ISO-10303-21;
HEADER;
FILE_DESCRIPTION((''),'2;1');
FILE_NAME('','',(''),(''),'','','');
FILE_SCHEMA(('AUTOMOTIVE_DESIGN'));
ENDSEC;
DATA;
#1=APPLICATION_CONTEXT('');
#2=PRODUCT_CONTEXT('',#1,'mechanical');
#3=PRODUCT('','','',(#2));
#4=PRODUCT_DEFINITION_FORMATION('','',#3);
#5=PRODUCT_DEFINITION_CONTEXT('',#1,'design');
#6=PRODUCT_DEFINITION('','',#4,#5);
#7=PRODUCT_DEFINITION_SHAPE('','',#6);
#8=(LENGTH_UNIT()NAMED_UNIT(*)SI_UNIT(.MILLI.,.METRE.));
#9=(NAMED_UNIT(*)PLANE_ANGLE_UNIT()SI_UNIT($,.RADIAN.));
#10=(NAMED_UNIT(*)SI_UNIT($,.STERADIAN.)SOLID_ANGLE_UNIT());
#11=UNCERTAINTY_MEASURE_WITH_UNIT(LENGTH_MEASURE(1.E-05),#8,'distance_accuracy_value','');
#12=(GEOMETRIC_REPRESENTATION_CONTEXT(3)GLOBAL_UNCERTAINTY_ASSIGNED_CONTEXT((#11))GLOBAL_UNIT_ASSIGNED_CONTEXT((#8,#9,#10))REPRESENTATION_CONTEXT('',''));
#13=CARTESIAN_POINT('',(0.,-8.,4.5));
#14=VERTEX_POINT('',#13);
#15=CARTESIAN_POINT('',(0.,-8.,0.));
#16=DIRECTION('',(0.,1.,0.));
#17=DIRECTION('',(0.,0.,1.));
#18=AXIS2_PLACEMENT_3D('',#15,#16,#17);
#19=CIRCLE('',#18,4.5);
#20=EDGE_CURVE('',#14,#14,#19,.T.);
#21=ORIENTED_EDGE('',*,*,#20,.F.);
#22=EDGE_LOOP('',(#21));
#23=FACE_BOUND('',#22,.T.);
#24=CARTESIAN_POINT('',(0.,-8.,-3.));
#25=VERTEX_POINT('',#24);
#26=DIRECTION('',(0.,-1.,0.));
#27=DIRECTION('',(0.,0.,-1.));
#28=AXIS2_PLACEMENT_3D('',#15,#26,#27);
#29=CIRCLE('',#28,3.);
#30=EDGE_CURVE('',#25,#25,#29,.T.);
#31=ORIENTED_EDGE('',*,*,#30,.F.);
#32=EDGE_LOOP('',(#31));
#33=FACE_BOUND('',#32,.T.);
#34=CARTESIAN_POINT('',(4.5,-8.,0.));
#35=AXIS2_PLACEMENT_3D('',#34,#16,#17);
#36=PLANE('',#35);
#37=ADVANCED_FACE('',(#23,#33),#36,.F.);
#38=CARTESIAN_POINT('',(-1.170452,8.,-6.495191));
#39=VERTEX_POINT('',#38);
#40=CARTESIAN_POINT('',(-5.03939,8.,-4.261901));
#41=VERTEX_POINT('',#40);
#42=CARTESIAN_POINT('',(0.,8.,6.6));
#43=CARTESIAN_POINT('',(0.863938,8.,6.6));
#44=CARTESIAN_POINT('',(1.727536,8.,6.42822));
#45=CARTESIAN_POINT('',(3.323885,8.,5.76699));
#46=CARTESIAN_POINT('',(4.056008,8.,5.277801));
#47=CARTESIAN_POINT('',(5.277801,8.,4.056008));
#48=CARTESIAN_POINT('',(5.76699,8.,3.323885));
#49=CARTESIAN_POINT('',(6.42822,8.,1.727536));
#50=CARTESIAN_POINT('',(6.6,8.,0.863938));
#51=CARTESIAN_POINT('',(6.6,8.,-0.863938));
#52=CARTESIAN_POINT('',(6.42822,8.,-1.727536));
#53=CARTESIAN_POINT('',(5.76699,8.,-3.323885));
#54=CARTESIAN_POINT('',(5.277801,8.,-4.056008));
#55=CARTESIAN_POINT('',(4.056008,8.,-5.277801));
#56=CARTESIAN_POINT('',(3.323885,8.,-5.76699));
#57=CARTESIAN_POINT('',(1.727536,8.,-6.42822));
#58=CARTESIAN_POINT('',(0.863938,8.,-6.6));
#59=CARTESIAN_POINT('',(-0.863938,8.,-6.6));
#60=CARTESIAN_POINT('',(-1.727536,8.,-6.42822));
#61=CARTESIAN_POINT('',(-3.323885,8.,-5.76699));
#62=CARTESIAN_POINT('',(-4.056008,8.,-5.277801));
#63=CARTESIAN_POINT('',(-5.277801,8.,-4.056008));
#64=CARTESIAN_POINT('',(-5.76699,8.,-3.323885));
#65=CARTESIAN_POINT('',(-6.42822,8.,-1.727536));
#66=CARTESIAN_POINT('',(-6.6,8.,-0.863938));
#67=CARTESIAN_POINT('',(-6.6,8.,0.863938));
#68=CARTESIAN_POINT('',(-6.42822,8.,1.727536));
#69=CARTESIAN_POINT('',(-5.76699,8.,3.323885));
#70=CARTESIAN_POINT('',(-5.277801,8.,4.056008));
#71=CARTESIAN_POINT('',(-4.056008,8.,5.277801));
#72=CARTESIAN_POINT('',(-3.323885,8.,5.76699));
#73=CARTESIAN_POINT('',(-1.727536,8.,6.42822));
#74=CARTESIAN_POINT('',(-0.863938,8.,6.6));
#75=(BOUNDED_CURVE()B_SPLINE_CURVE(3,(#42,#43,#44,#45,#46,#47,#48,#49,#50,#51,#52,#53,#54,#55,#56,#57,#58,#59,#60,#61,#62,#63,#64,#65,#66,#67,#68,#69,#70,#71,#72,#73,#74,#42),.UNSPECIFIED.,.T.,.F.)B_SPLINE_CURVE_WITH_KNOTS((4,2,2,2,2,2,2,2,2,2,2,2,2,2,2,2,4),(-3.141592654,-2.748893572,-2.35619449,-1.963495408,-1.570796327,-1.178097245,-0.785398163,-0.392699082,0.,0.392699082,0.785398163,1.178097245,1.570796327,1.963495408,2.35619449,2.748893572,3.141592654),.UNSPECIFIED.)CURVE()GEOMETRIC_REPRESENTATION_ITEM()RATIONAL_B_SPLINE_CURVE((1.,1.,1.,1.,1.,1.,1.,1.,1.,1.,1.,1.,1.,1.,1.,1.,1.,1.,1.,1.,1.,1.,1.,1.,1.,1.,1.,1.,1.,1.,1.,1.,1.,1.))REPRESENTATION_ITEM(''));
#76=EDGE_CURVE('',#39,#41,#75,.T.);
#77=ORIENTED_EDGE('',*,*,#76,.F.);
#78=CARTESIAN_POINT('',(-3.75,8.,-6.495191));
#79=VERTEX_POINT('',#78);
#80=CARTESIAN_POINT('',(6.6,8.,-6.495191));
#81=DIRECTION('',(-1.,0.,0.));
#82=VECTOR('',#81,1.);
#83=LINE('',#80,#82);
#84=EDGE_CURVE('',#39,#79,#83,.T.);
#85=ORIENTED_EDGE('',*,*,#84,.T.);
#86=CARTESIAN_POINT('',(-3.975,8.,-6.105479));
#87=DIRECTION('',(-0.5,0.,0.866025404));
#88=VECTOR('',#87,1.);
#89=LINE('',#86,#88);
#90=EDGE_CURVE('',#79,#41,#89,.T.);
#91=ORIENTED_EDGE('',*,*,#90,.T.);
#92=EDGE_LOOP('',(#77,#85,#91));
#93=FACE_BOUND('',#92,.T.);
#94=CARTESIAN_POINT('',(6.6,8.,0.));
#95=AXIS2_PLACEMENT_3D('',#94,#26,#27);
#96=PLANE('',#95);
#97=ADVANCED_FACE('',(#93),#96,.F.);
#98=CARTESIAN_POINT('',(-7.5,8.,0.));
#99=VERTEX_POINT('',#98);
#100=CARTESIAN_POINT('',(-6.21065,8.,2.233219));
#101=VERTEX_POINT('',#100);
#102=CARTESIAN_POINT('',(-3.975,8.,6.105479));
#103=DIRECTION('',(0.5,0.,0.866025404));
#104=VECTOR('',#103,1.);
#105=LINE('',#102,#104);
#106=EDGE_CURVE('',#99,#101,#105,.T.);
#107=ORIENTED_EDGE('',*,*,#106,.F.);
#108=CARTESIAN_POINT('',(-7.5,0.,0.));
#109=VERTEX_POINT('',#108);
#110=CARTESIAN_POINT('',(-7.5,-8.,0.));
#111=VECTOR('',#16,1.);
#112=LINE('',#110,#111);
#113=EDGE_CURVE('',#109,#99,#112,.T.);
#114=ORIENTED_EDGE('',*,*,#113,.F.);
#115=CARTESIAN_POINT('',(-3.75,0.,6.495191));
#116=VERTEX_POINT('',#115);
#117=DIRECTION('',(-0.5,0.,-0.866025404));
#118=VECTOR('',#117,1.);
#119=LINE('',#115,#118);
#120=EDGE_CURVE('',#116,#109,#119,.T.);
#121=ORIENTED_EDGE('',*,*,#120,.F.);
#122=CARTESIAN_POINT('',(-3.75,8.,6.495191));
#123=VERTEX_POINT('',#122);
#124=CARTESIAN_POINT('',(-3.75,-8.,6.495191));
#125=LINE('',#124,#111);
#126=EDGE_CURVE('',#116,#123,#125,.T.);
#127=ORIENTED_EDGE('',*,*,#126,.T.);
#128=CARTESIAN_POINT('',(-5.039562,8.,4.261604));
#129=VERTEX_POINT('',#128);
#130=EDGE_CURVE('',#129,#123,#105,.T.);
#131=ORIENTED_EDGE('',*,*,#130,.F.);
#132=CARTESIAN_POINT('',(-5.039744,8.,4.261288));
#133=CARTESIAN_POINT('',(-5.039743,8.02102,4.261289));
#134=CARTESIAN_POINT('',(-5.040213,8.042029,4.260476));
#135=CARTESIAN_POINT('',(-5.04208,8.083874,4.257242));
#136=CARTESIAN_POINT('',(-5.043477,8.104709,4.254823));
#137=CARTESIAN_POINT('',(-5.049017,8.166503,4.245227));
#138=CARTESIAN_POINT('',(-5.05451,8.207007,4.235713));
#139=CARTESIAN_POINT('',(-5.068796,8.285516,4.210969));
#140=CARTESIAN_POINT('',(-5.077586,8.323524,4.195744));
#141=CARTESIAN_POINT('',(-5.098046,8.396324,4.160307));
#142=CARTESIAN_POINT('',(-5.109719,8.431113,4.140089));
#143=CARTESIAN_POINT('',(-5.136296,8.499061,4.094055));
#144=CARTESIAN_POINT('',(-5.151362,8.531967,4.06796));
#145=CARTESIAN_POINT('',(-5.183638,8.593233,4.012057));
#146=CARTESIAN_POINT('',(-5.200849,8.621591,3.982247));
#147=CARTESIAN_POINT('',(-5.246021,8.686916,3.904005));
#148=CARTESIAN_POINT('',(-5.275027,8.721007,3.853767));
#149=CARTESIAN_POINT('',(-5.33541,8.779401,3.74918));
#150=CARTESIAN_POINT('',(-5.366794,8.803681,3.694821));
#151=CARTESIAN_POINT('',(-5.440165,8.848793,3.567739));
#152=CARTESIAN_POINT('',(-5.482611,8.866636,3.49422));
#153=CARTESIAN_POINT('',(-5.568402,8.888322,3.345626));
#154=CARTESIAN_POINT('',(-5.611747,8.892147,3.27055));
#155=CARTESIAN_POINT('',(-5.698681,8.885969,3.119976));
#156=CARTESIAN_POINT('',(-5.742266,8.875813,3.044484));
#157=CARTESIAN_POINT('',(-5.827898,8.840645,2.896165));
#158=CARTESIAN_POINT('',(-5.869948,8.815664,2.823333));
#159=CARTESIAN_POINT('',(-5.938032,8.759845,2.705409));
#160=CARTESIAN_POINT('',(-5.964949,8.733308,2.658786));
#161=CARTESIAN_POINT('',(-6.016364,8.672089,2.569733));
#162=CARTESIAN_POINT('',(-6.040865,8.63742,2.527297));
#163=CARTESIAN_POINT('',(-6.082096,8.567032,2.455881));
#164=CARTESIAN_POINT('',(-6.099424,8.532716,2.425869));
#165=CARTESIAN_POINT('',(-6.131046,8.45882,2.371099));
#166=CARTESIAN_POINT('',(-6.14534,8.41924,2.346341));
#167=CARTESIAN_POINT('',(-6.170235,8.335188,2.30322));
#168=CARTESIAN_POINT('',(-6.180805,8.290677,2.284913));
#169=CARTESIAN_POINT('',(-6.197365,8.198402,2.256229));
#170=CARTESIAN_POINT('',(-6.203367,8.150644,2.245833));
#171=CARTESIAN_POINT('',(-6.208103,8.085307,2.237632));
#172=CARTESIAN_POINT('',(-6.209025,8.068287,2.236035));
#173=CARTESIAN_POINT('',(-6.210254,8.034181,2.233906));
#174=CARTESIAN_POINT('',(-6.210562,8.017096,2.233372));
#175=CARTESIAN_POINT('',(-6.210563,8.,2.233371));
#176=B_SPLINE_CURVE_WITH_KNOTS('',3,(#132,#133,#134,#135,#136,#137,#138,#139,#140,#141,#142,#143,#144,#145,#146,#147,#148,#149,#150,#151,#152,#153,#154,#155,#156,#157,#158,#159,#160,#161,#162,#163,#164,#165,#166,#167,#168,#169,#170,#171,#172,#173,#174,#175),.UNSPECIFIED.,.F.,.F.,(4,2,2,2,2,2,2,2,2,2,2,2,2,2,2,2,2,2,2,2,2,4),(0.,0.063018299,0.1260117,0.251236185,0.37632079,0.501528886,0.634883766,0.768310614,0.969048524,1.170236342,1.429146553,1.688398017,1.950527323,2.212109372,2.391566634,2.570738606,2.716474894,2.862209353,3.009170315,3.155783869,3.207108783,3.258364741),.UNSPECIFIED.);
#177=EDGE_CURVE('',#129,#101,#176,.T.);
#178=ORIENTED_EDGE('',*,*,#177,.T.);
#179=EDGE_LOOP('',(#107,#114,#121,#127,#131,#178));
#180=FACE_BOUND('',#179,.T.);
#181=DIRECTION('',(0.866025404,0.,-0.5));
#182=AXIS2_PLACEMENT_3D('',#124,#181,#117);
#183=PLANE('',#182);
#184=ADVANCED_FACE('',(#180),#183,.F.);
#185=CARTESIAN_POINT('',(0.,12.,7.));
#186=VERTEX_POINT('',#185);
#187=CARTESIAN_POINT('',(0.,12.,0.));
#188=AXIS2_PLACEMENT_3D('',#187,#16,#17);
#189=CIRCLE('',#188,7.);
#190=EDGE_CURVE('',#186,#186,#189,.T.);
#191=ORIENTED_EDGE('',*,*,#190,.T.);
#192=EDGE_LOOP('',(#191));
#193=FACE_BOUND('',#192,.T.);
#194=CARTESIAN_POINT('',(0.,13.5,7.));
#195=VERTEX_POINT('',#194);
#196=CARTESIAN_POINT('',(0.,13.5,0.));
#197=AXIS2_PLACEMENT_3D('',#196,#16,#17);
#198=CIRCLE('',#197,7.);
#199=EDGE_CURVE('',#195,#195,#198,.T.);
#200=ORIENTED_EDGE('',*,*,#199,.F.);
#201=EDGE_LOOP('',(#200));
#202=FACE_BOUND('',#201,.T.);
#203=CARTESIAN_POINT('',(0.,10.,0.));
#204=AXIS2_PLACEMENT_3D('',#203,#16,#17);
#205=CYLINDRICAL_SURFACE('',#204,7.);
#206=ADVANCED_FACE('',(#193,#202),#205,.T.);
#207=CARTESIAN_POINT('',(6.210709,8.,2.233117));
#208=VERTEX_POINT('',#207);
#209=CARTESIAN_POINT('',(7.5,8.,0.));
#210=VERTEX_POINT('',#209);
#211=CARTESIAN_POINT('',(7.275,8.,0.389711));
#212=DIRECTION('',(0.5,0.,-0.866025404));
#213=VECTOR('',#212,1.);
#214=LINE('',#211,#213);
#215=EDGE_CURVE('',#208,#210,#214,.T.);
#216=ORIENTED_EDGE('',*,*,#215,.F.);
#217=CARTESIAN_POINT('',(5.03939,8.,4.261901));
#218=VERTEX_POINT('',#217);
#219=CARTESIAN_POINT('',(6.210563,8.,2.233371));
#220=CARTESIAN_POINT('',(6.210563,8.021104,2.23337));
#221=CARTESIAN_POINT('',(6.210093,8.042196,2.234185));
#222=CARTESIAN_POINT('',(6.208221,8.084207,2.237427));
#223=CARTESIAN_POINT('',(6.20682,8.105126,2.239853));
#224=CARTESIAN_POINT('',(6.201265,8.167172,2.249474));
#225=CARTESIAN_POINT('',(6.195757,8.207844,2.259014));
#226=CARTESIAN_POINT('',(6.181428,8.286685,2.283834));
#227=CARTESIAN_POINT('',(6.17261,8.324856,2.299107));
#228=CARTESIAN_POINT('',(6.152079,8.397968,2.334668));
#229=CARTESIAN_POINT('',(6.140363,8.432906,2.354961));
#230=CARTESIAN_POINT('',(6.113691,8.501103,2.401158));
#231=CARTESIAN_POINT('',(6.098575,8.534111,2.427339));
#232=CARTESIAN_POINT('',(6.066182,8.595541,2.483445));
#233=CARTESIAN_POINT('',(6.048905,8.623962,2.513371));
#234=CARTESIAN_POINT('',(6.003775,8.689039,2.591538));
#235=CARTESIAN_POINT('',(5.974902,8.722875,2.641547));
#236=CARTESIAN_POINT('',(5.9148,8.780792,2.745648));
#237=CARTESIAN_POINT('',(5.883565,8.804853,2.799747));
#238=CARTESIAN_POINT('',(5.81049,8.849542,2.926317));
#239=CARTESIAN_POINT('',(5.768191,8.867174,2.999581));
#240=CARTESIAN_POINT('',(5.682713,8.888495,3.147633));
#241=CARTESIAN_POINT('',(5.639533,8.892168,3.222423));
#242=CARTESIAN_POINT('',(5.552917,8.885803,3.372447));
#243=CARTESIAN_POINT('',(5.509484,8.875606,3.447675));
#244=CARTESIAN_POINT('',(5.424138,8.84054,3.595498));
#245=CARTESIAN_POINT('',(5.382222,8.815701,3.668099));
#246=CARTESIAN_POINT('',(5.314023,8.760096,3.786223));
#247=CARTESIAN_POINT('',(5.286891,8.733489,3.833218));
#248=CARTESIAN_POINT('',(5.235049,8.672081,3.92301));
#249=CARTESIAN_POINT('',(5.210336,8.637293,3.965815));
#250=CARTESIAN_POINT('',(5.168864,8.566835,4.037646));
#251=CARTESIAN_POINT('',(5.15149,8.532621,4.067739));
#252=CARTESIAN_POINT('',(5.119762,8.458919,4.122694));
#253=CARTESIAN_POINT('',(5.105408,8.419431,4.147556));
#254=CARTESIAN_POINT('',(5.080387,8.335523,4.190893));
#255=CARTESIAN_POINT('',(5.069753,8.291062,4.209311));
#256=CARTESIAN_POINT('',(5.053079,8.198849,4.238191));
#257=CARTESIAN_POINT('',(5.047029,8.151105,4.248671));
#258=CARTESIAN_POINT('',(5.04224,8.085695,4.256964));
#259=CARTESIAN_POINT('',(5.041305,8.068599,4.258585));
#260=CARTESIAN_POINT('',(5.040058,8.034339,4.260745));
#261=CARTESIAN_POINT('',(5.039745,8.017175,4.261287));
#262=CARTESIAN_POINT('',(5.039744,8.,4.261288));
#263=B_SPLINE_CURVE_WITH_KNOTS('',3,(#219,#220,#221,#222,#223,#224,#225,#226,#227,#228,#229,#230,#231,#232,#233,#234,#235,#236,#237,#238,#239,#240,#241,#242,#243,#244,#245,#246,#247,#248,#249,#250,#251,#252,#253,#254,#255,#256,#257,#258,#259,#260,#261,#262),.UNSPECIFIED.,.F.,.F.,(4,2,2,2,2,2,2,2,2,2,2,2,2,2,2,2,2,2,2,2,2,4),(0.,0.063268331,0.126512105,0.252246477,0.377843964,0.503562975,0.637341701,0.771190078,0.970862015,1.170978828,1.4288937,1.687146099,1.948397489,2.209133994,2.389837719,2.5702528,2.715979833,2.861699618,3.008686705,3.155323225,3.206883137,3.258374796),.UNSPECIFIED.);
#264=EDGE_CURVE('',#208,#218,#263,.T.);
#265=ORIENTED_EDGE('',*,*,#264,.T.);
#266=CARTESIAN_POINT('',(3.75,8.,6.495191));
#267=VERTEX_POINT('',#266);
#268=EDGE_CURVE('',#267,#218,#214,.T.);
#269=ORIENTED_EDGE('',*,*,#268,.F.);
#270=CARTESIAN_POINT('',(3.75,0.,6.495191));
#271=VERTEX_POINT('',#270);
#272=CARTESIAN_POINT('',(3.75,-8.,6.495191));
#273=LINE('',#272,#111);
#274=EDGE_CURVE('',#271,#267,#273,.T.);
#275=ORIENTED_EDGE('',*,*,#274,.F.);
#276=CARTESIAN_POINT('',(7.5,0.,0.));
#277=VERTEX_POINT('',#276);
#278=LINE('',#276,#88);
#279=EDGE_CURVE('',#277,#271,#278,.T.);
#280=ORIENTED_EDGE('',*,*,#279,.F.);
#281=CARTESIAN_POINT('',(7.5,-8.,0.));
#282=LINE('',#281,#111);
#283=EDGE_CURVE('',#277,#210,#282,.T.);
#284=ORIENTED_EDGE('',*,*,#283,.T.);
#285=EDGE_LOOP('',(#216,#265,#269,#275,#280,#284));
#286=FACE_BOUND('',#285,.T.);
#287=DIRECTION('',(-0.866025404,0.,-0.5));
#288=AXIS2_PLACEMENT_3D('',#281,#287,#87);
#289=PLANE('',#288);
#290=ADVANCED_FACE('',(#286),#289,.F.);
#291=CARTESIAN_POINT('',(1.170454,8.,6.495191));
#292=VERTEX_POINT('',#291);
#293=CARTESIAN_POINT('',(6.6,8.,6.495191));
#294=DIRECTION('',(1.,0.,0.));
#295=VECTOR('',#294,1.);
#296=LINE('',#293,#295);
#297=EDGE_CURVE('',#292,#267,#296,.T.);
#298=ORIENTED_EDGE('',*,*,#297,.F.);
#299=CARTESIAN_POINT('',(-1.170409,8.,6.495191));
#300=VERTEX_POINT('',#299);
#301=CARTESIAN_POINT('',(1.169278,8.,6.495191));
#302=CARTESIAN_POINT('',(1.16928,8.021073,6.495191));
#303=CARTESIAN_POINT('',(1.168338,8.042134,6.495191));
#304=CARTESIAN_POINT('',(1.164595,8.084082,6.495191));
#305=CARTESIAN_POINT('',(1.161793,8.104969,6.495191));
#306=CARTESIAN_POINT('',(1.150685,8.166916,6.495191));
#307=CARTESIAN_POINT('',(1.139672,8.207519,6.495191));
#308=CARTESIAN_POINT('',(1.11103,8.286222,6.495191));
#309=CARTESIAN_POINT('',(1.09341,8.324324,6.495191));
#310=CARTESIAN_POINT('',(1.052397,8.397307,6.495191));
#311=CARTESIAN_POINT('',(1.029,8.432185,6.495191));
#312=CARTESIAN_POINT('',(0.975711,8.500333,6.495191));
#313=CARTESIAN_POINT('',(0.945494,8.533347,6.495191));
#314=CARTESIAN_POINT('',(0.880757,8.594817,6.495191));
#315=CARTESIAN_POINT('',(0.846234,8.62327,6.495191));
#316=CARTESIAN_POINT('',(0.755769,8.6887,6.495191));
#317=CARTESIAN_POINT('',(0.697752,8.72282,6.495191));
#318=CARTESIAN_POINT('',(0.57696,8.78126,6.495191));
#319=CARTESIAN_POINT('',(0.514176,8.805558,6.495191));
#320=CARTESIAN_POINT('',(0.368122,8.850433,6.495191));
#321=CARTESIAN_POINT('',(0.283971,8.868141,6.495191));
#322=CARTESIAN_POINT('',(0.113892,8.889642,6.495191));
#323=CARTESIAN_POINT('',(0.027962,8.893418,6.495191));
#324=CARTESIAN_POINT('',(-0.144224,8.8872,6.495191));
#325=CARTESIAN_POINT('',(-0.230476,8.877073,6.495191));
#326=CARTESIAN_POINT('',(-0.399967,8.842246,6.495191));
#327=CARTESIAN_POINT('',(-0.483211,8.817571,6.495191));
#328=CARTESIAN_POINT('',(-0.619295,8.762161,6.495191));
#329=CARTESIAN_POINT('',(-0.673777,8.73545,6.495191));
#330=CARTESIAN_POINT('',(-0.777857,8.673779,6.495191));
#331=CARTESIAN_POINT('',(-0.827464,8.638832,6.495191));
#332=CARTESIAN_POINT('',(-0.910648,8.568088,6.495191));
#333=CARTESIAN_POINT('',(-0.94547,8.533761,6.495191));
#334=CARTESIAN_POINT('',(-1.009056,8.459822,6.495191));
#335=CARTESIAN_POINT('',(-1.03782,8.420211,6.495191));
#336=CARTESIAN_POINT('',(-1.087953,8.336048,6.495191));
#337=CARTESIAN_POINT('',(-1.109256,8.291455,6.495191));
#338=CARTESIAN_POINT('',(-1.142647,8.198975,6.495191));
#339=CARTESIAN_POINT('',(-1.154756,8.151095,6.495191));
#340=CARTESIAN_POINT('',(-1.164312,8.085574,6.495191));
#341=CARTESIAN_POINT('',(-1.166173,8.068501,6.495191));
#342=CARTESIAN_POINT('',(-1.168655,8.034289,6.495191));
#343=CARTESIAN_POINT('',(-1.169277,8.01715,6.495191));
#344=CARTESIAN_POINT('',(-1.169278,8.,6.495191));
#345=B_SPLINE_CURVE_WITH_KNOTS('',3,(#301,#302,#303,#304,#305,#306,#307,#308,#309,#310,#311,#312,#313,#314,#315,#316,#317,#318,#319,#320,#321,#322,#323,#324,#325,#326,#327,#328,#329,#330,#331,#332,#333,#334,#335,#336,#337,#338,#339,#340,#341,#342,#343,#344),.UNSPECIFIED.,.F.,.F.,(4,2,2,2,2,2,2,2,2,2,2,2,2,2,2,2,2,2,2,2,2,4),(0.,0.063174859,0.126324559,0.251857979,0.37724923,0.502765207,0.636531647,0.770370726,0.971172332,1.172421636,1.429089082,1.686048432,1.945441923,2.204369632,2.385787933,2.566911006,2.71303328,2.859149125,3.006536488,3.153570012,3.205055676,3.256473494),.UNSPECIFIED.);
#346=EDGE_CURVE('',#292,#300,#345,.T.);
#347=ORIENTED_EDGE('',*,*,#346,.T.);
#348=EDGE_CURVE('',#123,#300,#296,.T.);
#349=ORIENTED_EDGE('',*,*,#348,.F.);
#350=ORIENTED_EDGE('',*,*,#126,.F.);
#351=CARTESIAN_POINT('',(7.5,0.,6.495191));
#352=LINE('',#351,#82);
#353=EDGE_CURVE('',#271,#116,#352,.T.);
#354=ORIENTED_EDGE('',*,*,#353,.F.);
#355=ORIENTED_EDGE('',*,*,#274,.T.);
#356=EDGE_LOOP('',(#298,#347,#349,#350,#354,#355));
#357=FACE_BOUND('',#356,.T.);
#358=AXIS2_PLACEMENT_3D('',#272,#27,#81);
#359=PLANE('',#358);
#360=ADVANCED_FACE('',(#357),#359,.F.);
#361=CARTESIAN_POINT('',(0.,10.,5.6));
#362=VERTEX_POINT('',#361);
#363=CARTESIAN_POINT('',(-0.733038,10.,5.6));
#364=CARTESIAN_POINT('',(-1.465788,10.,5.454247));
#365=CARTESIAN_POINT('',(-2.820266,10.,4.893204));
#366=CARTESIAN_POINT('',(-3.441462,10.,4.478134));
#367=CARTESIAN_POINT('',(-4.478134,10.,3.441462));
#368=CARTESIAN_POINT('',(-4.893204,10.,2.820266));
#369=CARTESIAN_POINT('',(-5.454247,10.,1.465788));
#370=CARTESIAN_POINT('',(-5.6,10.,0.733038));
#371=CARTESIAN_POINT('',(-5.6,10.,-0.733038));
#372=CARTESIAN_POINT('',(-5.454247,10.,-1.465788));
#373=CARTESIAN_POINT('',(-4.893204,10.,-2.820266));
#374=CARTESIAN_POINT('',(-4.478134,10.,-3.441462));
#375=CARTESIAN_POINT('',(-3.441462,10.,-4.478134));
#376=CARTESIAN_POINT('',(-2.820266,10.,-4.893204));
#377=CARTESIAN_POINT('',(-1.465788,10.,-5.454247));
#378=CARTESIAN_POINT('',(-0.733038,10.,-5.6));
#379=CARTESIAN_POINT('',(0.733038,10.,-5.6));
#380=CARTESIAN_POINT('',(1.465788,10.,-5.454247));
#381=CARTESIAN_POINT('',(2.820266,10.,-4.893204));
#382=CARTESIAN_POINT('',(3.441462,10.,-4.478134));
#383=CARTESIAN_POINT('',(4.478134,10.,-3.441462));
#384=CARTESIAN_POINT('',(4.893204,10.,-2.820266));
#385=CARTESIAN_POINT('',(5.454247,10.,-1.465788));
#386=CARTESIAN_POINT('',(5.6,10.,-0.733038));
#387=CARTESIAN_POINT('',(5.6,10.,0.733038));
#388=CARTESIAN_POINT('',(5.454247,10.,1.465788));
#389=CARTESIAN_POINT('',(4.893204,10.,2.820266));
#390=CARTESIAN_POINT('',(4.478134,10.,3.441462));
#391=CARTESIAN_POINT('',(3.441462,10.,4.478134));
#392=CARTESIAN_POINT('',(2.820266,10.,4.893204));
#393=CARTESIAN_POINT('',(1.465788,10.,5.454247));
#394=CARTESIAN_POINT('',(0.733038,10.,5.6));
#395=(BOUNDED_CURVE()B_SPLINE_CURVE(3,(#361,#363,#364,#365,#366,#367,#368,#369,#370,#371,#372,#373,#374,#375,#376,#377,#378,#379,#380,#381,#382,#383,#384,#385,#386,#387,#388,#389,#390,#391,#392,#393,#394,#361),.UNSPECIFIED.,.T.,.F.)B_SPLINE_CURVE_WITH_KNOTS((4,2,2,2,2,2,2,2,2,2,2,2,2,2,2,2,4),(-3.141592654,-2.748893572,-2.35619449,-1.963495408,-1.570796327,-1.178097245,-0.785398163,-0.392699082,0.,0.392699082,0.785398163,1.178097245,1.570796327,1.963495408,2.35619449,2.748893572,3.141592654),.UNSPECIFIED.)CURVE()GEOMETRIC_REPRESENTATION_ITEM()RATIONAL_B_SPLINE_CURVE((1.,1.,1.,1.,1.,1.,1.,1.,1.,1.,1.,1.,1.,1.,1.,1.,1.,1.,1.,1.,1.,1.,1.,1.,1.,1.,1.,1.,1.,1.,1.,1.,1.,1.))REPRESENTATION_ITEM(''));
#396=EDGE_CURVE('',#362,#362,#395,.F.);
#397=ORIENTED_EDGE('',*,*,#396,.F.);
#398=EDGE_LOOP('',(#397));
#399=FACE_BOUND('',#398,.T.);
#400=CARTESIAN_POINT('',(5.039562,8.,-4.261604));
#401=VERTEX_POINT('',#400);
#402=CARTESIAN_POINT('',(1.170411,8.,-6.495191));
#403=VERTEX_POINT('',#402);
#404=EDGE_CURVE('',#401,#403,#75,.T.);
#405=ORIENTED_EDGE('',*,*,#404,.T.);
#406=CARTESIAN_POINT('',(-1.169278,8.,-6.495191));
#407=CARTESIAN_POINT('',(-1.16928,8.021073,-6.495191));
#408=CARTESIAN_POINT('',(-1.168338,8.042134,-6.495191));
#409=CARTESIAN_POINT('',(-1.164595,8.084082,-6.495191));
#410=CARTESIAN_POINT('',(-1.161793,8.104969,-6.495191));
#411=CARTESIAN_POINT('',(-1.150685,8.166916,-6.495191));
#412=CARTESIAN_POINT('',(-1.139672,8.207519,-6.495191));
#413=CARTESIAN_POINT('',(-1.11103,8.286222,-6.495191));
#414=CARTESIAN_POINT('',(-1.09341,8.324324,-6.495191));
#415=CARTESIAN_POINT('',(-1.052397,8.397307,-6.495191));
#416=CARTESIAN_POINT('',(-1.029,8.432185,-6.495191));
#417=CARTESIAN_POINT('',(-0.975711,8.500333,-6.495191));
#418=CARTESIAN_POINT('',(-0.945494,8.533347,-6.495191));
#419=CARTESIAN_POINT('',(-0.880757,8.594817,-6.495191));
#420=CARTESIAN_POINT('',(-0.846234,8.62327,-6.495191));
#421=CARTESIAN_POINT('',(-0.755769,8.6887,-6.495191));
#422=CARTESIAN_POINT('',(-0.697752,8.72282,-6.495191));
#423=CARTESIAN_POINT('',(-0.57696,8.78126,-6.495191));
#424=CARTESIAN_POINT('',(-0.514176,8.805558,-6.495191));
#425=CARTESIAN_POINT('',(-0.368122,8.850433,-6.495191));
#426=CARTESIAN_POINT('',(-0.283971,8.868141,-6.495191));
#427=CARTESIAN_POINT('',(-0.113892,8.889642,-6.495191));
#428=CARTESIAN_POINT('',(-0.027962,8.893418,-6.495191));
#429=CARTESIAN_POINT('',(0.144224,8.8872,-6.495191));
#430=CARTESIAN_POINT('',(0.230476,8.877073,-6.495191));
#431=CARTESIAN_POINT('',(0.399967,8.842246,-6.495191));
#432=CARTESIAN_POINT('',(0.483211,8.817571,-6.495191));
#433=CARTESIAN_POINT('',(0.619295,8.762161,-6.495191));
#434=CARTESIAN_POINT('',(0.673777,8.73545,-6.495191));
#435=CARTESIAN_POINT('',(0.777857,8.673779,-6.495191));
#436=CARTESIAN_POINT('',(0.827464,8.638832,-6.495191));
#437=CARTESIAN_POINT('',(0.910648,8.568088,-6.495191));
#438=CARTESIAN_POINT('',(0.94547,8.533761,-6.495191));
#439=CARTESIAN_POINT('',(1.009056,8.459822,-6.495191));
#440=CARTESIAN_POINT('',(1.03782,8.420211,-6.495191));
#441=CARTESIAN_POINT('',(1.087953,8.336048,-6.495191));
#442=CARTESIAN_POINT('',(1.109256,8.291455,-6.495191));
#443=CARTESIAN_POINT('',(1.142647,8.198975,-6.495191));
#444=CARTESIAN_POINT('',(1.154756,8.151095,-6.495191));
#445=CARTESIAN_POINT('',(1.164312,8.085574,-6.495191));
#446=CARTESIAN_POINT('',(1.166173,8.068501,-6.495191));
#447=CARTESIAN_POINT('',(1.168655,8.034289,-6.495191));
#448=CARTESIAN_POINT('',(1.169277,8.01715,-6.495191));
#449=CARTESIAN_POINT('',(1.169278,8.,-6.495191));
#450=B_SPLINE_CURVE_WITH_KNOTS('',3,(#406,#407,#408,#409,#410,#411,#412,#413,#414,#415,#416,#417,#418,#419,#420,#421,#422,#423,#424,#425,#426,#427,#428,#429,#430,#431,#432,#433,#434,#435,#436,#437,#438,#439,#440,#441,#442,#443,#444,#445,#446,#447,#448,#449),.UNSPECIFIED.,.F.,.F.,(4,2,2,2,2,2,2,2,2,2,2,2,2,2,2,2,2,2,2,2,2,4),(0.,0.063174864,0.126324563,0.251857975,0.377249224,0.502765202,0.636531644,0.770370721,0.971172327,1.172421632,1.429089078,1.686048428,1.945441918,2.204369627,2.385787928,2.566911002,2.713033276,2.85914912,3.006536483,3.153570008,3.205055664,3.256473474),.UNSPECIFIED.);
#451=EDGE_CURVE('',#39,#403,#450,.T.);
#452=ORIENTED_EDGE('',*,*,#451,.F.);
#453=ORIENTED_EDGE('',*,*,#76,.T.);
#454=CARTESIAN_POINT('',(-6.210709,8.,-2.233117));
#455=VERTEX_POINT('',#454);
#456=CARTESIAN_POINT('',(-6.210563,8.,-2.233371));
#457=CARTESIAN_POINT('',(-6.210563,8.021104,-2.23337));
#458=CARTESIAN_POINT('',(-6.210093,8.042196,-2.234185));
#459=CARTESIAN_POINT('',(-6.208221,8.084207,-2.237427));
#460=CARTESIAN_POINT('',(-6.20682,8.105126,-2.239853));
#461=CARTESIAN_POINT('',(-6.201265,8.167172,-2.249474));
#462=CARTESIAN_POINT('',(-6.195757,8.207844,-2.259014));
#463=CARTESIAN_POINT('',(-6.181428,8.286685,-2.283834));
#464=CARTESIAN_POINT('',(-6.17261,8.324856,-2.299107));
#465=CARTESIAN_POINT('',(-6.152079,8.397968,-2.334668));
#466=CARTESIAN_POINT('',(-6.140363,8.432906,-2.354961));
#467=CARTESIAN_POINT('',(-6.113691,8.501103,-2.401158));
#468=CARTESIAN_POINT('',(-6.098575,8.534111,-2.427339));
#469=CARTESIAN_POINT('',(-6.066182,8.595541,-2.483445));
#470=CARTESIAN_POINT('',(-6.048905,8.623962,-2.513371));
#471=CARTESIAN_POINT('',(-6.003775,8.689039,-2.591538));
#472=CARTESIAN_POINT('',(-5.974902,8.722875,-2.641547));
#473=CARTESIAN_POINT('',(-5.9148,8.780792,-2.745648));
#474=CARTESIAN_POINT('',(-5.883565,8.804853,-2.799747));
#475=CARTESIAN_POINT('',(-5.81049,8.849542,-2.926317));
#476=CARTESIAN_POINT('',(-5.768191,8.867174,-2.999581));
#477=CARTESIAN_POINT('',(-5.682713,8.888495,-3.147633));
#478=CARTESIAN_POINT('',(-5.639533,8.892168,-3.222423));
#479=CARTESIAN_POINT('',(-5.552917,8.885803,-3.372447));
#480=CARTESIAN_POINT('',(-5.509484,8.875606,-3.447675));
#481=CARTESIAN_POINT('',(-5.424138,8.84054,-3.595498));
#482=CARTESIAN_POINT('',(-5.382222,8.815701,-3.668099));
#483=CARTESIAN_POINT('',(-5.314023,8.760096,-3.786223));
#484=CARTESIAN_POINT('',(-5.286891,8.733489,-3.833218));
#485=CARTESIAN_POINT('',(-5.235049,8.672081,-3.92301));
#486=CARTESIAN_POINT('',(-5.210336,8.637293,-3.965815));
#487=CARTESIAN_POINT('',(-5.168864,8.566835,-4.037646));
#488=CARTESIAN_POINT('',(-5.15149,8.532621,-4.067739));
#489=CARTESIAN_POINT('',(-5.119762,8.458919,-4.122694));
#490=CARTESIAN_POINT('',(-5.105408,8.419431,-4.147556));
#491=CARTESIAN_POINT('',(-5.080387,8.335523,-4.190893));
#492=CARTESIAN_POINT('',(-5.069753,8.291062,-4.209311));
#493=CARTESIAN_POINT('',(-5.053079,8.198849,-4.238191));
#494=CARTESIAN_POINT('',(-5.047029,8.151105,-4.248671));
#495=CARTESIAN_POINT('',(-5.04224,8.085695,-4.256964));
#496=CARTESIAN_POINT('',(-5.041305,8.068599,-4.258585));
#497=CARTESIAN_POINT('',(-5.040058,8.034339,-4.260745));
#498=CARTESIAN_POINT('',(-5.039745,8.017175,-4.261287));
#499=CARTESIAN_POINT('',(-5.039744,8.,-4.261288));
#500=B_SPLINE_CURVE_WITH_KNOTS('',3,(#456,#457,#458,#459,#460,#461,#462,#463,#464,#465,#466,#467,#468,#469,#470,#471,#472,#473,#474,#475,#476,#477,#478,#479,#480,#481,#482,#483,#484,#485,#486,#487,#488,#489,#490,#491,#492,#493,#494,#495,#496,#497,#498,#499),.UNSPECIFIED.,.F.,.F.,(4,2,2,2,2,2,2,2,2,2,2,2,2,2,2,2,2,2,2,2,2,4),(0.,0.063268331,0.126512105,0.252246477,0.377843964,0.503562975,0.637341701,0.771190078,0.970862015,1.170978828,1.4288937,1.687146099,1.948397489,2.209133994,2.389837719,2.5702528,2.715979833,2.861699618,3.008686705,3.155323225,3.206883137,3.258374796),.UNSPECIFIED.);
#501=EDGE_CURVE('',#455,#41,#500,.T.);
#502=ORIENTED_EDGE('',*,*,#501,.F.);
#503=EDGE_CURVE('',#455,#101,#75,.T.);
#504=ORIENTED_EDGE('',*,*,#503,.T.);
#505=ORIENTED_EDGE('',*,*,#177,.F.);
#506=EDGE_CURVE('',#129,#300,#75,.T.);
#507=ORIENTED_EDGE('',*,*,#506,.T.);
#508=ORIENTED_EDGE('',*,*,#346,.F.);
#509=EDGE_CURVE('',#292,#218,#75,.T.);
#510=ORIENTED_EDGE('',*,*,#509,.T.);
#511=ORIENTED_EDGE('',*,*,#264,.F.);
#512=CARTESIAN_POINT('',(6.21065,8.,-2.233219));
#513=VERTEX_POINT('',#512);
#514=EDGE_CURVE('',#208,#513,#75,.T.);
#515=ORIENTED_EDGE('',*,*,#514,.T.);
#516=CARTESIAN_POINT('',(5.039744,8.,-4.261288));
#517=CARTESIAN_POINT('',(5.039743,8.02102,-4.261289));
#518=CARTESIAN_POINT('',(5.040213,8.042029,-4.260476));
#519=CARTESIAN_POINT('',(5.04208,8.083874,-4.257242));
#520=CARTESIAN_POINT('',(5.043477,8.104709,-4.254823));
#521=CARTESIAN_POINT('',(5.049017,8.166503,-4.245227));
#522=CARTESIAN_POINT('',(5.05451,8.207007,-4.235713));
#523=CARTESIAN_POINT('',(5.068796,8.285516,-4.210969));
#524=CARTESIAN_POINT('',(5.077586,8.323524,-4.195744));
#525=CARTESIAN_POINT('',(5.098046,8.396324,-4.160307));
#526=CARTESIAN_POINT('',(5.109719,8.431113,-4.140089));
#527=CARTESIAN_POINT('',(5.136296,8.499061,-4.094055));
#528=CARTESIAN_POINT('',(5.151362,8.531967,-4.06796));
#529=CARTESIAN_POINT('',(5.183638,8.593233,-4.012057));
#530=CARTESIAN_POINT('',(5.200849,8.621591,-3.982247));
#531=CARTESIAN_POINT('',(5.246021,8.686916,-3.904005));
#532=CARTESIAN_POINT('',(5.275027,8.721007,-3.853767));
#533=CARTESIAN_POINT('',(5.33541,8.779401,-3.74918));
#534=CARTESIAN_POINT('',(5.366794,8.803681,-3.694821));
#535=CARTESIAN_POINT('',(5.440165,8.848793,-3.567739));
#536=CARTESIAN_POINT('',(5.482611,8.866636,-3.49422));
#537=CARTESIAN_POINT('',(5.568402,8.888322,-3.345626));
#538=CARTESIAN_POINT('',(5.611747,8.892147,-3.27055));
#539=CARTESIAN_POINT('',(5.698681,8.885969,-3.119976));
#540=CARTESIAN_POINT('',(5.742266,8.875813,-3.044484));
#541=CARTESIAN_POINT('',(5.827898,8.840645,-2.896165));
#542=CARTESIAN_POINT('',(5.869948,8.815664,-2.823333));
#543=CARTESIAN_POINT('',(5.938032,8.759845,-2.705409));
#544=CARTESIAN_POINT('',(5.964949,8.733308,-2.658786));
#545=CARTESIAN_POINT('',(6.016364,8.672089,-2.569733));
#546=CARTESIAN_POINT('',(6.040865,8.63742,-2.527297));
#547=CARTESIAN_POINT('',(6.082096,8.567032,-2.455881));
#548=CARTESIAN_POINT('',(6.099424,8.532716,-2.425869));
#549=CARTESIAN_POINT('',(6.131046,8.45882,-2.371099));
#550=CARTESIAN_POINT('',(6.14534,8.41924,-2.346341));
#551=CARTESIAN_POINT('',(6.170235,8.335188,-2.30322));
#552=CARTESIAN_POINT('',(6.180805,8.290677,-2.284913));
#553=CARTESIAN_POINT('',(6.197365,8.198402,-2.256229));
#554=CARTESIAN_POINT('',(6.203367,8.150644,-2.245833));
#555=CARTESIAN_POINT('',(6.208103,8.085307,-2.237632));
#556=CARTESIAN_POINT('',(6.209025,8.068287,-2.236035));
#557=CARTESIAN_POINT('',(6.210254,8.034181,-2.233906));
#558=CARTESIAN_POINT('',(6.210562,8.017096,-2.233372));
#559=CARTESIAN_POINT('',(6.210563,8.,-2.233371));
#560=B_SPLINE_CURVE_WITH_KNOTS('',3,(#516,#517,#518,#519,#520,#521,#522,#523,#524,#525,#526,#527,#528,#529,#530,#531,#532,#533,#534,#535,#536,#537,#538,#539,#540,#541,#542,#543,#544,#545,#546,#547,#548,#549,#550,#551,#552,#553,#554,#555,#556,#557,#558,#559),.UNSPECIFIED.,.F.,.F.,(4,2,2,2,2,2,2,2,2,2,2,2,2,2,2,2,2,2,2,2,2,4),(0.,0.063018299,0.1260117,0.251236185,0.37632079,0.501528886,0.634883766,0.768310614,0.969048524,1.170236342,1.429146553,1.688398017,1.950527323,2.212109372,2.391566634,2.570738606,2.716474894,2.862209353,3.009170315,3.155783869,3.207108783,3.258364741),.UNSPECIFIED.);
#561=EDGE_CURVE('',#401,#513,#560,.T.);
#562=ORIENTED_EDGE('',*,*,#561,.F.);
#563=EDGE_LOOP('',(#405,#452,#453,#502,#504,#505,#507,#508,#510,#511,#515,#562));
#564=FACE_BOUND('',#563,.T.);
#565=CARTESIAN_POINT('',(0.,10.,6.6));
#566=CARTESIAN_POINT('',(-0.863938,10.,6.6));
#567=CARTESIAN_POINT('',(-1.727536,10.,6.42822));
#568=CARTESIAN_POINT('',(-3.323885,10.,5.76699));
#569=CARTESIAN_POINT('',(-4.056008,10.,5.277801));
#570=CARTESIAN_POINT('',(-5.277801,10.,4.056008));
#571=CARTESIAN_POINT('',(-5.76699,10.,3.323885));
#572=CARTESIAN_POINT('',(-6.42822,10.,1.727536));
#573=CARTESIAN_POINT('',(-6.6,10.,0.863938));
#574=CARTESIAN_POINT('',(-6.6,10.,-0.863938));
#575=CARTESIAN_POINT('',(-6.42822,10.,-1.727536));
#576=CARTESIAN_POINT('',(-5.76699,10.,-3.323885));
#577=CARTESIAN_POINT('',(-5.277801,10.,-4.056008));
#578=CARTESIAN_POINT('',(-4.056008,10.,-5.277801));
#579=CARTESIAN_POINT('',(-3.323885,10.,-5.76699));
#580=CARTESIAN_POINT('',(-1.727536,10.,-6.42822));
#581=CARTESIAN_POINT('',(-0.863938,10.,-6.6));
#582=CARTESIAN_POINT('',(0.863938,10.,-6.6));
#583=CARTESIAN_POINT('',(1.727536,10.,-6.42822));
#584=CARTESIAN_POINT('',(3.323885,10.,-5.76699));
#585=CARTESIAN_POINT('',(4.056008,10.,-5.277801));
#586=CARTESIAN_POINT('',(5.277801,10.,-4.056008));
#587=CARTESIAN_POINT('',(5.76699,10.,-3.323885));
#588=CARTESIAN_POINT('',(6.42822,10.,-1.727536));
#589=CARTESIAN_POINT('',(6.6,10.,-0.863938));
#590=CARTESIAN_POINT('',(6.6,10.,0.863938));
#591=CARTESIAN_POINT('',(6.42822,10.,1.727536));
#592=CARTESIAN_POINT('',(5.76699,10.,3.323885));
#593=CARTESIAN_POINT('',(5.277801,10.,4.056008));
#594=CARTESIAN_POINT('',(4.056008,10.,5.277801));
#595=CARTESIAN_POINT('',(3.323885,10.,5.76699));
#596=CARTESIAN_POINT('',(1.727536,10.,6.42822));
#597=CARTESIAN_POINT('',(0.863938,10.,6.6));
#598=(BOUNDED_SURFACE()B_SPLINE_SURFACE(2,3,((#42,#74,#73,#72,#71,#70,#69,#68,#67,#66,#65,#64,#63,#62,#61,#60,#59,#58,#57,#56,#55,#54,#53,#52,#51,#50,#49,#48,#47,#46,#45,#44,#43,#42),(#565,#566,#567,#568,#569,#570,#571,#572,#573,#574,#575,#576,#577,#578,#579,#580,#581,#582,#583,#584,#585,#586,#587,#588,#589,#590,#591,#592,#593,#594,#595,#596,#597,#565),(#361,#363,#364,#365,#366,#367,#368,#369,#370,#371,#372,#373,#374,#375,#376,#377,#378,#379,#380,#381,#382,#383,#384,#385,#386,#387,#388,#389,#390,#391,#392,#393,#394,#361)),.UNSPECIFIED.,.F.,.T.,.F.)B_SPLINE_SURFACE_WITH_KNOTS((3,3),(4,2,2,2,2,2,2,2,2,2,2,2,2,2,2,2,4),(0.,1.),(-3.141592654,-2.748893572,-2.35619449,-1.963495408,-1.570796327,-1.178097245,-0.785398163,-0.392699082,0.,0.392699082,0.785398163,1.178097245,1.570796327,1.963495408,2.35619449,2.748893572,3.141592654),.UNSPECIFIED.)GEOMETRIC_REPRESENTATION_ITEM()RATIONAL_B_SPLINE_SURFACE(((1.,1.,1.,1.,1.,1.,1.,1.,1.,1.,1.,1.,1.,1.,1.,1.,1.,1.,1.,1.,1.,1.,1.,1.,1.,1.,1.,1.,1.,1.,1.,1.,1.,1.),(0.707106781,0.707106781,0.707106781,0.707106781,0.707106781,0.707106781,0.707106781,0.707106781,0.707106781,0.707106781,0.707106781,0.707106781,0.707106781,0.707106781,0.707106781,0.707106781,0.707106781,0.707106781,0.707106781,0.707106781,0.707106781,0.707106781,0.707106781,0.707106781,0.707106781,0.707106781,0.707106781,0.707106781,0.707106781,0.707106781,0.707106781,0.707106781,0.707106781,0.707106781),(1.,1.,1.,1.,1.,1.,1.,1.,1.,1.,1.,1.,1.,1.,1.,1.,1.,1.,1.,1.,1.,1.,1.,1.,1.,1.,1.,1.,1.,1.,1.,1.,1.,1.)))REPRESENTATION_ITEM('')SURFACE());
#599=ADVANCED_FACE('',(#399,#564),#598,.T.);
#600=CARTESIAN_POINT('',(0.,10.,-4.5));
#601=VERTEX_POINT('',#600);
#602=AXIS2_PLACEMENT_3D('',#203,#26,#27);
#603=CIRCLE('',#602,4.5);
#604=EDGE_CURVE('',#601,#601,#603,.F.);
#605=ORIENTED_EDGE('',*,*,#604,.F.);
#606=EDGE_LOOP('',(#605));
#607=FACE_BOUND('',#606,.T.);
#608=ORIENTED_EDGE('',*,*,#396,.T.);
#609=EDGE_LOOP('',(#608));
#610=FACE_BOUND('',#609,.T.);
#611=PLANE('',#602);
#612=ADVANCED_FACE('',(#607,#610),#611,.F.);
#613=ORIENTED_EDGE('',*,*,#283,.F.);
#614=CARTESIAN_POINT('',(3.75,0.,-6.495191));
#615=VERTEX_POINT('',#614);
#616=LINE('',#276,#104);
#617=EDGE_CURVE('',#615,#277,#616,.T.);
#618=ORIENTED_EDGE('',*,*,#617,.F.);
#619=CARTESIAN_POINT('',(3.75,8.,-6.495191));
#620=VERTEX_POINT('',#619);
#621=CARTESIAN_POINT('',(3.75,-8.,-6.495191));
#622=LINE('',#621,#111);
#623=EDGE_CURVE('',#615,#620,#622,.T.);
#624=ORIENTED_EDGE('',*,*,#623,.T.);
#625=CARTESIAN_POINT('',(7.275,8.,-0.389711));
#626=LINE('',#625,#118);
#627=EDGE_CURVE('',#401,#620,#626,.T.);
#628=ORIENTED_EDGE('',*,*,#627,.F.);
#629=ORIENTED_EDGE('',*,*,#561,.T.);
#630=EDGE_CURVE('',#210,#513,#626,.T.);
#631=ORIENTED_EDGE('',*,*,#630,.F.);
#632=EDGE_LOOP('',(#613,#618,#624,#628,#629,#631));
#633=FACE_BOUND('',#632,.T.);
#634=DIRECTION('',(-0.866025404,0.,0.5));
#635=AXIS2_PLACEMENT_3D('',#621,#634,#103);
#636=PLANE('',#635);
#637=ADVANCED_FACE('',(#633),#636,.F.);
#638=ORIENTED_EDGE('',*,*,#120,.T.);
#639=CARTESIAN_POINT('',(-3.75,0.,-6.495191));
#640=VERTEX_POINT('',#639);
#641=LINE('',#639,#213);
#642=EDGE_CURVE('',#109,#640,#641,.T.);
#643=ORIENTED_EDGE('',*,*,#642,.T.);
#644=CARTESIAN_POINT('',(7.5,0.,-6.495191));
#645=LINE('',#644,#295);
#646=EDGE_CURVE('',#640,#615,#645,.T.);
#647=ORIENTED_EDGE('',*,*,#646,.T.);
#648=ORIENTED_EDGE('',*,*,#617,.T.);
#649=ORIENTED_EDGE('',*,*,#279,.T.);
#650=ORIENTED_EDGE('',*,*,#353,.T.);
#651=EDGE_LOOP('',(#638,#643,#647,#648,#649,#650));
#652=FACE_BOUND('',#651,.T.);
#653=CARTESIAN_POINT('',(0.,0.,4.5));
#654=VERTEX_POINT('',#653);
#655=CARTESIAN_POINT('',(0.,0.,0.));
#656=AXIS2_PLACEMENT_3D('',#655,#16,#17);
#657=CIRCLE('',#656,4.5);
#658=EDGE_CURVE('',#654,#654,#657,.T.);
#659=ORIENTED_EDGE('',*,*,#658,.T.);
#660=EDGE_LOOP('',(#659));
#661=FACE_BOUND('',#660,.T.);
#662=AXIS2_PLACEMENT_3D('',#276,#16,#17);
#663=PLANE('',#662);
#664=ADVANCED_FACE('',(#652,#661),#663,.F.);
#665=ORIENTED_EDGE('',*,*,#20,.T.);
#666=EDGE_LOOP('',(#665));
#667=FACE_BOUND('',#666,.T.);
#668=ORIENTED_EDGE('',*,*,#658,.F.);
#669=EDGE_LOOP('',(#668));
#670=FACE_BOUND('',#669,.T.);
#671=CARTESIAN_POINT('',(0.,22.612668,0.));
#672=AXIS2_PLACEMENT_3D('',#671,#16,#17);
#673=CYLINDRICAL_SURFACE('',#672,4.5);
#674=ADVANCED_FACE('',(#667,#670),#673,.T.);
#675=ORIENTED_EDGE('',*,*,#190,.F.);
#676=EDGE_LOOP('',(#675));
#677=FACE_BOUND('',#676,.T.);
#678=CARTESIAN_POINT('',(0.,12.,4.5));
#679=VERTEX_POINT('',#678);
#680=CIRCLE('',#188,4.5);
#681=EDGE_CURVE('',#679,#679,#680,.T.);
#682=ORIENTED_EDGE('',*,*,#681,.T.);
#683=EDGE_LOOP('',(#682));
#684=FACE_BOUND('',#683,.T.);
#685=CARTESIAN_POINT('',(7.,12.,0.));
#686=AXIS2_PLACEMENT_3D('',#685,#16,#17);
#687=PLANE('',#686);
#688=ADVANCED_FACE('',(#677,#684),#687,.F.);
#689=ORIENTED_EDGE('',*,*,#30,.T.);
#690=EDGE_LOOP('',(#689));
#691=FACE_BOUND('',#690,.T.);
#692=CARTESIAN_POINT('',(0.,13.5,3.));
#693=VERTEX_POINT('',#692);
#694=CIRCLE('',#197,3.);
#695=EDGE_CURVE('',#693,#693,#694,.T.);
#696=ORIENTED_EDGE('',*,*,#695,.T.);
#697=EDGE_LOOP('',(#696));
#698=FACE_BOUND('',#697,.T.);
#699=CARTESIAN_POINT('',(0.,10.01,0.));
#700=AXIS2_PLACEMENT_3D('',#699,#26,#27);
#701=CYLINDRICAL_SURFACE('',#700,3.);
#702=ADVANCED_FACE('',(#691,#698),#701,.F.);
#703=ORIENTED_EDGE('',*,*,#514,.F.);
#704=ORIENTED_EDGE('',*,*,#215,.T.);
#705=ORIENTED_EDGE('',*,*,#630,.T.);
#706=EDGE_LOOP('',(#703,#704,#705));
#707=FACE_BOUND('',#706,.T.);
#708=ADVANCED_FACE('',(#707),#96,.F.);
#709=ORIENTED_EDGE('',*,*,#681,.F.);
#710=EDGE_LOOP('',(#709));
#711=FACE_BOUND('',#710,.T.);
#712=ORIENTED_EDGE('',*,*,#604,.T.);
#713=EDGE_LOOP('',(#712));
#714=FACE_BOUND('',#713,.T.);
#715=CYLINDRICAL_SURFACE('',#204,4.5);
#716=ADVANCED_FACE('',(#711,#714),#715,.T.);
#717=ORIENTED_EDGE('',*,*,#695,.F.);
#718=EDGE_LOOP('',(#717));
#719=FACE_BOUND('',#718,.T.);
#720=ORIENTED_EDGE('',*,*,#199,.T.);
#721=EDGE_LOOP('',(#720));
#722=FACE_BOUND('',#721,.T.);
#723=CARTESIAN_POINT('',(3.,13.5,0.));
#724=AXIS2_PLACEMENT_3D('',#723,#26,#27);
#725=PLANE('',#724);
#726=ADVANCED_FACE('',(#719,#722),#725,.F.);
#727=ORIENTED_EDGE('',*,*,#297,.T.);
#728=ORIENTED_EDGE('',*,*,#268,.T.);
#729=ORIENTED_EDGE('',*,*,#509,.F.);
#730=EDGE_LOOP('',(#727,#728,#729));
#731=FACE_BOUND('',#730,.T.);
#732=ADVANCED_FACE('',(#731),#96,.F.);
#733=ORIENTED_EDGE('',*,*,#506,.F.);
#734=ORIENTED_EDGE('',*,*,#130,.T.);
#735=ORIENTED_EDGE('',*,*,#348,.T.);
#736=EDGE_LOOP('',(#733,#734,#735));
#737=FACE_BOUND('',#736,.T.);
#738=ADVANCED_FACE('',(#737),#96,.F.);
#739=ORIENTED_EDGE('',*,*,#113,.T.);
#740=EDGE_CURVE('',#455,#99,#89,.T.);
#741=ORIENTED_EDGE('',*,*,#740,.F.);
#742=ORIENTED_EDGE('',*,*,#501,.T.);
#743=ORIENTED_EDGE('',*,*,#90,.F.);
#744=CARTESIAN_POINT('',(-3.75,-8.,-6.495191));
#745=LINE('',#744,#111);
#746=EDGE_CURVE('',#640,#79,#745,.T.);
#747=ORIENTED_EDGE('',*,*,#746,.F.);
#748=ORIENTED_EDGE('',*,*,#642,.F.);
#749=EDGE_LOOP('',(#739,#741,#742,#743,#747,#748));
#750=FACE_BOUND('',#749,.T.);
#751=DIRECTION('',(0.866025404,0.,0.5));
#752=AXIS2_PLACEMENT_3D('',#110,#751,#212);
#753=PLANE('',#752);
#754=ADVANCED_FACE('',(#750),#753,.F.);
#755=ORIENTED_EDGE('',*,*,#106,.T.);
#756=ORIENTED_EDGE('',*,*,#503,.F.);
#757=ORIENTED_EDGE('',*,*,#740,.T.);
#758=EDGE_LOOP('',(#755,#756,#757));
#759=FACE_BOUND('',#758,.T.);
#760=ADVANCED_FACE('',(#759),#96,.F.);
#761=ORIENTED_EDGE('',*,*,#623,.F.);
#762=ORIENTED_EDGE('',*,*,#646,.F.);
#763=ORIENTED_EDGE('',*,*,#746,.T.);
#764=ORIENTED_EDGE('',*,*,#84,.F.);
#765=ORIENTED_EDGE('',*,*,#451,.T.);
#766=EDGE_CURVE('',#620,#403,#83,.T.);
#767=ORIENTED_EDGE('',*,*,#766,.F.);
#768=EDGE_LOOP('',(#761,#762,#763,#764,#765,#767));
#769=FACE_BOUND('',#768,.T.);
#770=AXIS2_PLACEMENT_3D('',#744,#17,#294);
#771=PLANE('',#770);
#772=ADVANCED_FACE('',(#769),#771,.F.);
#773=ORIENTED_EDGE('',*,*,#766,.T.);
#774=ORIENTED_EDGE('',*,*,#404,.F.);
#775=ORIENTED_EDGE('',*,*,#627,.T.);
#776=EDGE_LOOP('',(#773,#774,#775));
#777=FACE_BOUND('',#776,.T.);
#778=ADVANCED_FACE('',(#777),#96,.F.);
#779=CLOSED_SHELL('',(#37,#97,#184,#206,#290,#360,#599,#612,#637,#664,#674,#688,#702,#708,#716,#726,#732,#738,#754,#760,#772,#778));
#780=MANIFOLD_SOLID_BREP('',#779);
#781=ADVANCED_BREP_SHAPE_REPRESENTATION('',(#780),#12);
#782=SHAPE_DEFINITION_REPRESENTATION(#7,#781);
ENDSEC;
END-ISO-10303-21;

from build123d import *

# Parameters (mm, degrees)
FILLET1_SIZE       = 1
FILLET1_SIZE_2     = 2
CUT_EXTRUDE1_DEPTH = 20.19635382
CIRPATTERN1_COUNT  = 6
SKETCH6_R          = 3
CUT_EXTRUDE2_DEPTH = 21.553284565


with BuildPart() as part:
    # Sketch1 → Revolve1 (revolve)
    with BuildSketch(Plane.XY, mode=Mode.PRIVATE) as revolve1_sk:
        Polygon((0, 10), (6.6, 10), (6.6, 8), (7.5, 8), (7.5, 0), (4.5, 0), (4.5, -8), (0, -8), align=None)
    revolve(revolve1_sk.sketch.rotate(Axis((0, 22.612667954, 0), (0, -1, 0)), 90), axis=Axis((0, 22.612667954, 0), (0, -1, 0)))

    # Fillet1
    # an asymmetric fillet: 2, 1 mm, written as the material it takes off along each edge
    with BuildSketch(Plane(origin=(0, 10, 0), x_dir=(0, 0, 1), z_dir=(1, 0, 0))) as fillet1_piece_1:
        with BuildLine():
            Bezier((6.6 - FILLET1_SIZE, 0), (6.6, 0), (6.6, FILLET1_SIZE_2), weights=[1, 0.707106781, 1])
            Line((6.6, FILLET1_SIZE_2), (6.6, 0))
            Line((6.6, 0), (6.6 - FILLET1_SIZE, 0))
        make_face()
    revolve(axis=Axis((0, 10, 0), (0, -1, 0)), mode=Mode.SUBTRACT)

    # Sketch2 → Cut-Extrude1 (cut, symmetric)
    with BuildSketch(Plane(origin=(0, 8, 0), x_dir=(1, 0, 0), z_dir=(0, 1, 0))):
        with BuildLine():
            Line((3.75, 6.495190528), (7.5, 0))
            ThreePointArc((7.5, 0), (6.495190528, 3.75), (3.75, 6.495190528))
        make_face()
    cut_extrude1 = extrude(amount=CUT_EXTRUDE1_DEPTH, both=True, mode=Mode.SUBTRACT)

    # CirPattern1: Cut-Extrude1 ×6 about axis
    cirpattern1_axis = Axis((0, 0, 0), (0, 1, 0))
    for i in range(1, CIRPATTERN1_COUNT):
        add(cut_extrude1.rotate(cirpattern1_axis, i * 360 / CIRPATTERN1_COUNT), mode=Mode.SUBTRACT)

    # Sketch6 → Cut-Extrude2 (cut, through all)
    with BuildSketch(Plane.XZ.offset(8)):
        with Locations(Location((0, 0, 0), (0, 0, 270))):
            Circle(SKETCH6_R)
    extrude(amount=-CUT_EXTRUDE2_DEPTH, mode=Mode.SUBTRACT)

    # Sketch7 → Revolve2 (revolve)
    with BuildSketch(Plane.XY, mode=Mode.PRIVATE) as revolve2_sk:
        Polygon((3, 10), (3, 13.5), (7, 13.5), (7, 12), (4.5, 12), (4.5, 10), align=None)
    revolve(revolve2_sk.sketch.rotate(Axis((0, 10.01, 0), (0, -1, 0)), 90), axis=Axis((0, 10.01, 0), (0, -1, 0)))


solid = part.part
